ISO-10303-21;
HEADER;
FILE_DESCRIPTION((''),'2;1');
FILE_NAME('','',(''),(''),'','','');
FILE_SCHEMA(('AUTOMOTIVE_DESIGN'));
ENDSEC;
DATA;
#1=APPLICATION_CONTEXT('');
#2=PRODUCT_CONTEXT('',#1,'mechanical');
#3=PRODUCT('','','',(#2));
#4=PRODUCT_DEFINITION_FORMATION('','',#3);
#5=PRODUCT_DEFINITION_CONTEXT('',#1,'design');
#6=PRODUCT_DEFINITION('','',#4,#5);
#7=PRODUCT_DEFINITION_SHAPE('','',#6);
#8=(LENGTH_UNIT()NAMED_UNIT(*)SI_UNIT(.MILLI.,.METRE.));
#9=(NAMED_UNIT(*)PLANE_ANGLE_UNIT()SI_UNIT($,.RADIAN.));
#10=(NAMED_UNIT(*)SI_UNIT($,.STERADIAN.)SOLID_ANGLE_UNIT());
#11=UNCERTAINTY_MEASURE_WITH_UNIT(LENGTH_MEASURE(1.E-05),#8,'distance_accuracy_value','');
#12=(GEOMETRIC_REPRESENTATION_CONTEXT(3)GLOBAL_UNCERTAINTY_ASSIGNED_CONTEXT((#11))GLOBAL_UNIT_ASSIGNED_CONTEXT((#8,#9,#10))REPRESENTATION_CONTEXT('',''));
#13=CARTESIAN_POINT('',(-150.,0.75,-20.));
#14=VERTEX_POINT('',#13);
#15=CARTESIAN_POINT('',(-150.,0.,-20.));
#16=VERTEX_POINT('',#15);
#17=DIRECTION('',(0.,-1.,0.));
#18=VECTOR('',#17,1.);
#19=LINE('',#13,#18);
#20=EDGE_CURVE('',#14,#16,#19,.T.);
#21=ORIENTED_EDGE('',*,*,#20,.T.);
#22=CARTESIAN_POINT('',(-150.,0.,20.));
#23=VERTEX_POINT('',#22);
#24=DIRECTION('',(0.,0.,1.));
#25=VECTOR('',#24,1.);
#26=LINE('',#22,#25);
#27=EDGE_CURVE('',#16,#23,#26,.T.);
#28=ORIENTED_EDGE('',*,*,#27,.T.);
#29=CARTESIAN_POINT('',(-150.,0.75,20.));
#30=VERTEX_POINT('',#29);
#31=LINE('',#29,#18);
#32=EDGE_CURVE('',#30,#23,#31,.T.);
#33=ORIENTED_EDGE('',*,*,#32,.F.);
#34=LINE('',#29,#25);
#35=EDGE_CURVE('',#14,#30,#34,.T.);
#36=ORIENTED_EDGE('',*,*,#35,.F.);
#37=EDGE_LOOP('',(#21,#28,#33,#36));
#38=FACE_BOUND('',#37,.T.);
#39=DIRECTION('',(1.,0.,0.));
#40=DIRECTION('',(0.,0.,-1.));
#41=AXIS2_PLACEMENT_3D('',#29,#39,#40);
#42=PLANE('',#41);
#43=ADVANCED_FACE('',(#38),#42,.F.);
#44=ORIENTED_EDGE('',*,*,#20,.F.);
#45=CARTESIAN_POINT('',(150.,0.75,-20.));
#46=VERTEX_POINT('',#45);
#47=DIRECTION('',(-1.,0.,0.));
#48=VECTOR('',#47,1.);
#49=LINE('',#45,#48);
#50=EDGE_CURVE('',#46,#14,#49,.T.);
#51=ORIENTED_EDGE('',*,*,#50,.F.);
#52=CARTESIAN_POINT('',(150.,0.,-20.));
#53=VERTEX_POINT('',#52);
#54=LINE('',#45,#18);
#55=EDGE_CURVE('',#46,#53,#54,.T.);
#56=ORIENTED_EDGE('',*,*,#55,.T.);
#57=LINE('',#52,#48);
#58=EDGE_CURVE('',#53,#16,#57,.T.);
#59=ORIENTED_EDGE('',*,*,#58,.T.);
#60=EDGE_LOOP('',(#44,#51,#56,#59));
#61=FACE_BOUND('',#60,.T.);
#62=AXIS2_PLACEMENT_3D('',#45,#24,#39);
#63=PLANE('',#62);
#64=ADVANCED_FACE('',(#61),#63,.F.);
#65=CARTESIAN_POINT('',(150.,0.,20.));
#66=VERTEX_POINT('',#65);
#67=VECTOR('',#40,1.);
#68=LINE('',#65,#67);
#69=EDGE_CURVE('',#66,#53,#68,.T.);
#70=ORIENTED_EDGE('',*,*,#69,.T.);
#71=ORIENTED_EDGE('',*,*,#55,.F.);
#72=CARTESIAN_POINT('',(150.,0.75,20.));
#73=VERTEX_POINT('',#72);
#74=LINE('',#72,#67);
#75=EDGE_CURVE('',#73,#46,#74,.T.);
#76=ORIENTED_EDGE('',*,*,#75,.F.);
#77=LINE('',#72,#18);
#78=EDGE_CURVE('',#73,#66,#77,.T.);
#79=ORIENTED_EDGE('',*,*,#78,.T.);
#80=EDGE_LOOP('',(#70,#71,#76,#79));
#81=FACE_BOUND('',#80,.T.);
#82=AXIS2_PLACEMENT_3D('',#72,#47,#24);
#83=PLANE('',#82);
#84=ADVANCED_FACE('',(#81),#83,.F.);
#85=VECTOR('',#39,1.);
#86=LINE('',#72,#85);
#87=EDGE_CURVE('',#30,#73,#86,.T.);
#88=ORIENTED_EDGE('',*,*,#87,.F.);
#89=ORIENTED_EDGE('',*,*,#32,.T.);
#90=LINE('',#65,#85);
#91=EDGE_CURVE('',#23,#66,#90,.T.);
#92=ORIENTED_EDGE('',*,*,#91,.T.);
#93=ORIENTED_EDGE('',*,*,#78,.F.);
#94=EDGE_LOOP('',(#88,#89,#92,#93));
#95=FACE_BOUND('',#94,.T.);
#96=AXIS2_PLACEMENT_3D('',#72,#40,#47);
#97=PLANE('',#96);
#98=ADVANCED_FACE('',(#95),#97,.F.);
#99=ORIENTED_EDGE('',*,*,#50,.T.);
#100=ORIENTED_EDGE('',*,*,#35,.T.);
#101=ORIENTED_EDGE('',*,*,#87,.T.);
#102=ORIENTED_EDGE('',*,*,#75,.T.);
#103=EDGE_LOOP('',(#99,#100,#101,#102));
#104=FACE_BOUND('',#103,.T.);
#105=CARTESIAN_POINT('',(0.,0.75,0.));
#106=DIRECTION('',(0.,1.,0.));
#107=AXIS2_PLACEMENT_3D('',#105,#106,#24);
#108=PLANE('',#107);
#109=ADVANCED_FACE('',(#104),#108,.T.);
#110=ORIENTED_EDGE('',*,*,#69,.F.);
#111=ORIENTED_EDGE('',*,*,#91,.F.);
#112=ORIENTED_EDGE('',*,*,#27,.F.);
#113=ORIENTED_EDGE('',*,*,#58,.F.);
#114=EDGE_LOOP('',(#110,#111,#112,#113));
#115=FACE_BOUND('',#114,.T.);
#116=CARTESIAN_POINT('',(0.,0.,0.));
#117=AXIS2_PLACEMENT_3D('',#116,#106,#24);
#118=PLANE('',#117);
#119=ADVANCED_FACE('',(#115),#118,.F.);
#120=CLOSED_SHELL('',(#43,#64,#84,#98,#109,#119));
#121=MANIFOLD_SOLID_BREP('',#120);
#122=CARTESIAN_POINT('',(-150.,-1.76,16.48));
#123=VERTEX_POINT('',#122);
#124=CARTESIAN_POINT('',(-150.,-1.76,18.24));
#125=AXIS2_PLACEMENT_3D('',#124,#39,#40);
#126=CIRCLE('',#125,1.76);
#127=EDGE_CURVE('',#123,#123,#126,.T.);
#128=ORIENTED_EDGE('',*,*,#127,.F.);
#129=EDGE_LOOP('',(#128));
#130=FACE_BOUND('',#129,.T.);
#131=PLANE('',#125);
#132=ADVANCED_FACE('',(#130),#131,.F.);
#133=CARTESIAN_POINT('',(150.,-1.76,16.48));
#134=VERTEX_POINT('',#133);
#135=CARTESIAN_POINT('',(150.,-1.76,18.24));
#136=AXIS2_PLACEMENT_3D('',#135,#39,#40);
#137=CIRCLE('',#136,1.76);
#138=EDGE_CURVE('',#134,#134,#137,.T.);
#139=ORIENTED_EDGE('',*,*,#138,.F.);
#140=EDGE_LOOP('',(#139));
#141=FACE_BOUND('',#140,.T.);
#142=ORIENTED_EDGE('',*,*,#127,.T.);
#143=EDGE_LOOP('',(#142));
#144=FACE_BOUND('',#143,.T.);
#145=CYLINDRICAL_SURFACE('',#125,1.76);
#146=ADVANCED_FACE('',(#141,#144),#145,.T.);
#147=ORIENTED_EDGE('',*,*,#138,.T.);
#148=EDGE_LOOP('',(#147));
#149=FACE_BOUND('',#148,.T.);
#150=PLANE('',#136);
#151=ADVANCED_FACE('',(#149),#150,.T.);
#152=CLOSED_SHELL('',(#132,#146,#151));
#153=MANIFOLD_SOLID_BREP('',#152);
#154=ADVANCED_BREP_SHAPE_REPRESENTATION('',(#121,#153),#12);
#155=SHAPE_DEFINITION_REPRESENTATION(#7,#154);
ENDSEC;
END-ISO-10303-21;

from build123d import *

# Parameters (mm, degrees)
SKETCH1_W           = 300
SKETCH1_H           = 40
BASE_FLANGE1_DEPTH  = 0.75
SKETCH6_R           = 1.76
BOSS_EXTRUDE1_DEPTH = 300


# Sheet-metal steps are written as plain solids
with BuildPart() as part:
    # Sketch1 → Base-Flange1 (new body)
    with BuildSketch(Plane(origin=(0, 0, 0), x_dir=(1, 0, 0), z_dir=(0, 1, 0))):
        Rectangle(SKETCH1_W, SKETCH1_H)
    extrude(amount=BASE_FLANGE1_DEPTH)


with BuildPart() as body_2:
    # Sketch6 → Boss-Extrude1 (new body)
    with BuildSketch(Plane(origin=(150, 0, 0), x_dir=(0, 0, -1), z_dir=(1, 0, 0))):
        with Locations((-18.24, -1.76)):
            Circle(SKETCH6_R)
    extrude(amount=-BOSS_EXTRUDE1_DEPTH)


solid = Compound([part.part, body_2.part])
